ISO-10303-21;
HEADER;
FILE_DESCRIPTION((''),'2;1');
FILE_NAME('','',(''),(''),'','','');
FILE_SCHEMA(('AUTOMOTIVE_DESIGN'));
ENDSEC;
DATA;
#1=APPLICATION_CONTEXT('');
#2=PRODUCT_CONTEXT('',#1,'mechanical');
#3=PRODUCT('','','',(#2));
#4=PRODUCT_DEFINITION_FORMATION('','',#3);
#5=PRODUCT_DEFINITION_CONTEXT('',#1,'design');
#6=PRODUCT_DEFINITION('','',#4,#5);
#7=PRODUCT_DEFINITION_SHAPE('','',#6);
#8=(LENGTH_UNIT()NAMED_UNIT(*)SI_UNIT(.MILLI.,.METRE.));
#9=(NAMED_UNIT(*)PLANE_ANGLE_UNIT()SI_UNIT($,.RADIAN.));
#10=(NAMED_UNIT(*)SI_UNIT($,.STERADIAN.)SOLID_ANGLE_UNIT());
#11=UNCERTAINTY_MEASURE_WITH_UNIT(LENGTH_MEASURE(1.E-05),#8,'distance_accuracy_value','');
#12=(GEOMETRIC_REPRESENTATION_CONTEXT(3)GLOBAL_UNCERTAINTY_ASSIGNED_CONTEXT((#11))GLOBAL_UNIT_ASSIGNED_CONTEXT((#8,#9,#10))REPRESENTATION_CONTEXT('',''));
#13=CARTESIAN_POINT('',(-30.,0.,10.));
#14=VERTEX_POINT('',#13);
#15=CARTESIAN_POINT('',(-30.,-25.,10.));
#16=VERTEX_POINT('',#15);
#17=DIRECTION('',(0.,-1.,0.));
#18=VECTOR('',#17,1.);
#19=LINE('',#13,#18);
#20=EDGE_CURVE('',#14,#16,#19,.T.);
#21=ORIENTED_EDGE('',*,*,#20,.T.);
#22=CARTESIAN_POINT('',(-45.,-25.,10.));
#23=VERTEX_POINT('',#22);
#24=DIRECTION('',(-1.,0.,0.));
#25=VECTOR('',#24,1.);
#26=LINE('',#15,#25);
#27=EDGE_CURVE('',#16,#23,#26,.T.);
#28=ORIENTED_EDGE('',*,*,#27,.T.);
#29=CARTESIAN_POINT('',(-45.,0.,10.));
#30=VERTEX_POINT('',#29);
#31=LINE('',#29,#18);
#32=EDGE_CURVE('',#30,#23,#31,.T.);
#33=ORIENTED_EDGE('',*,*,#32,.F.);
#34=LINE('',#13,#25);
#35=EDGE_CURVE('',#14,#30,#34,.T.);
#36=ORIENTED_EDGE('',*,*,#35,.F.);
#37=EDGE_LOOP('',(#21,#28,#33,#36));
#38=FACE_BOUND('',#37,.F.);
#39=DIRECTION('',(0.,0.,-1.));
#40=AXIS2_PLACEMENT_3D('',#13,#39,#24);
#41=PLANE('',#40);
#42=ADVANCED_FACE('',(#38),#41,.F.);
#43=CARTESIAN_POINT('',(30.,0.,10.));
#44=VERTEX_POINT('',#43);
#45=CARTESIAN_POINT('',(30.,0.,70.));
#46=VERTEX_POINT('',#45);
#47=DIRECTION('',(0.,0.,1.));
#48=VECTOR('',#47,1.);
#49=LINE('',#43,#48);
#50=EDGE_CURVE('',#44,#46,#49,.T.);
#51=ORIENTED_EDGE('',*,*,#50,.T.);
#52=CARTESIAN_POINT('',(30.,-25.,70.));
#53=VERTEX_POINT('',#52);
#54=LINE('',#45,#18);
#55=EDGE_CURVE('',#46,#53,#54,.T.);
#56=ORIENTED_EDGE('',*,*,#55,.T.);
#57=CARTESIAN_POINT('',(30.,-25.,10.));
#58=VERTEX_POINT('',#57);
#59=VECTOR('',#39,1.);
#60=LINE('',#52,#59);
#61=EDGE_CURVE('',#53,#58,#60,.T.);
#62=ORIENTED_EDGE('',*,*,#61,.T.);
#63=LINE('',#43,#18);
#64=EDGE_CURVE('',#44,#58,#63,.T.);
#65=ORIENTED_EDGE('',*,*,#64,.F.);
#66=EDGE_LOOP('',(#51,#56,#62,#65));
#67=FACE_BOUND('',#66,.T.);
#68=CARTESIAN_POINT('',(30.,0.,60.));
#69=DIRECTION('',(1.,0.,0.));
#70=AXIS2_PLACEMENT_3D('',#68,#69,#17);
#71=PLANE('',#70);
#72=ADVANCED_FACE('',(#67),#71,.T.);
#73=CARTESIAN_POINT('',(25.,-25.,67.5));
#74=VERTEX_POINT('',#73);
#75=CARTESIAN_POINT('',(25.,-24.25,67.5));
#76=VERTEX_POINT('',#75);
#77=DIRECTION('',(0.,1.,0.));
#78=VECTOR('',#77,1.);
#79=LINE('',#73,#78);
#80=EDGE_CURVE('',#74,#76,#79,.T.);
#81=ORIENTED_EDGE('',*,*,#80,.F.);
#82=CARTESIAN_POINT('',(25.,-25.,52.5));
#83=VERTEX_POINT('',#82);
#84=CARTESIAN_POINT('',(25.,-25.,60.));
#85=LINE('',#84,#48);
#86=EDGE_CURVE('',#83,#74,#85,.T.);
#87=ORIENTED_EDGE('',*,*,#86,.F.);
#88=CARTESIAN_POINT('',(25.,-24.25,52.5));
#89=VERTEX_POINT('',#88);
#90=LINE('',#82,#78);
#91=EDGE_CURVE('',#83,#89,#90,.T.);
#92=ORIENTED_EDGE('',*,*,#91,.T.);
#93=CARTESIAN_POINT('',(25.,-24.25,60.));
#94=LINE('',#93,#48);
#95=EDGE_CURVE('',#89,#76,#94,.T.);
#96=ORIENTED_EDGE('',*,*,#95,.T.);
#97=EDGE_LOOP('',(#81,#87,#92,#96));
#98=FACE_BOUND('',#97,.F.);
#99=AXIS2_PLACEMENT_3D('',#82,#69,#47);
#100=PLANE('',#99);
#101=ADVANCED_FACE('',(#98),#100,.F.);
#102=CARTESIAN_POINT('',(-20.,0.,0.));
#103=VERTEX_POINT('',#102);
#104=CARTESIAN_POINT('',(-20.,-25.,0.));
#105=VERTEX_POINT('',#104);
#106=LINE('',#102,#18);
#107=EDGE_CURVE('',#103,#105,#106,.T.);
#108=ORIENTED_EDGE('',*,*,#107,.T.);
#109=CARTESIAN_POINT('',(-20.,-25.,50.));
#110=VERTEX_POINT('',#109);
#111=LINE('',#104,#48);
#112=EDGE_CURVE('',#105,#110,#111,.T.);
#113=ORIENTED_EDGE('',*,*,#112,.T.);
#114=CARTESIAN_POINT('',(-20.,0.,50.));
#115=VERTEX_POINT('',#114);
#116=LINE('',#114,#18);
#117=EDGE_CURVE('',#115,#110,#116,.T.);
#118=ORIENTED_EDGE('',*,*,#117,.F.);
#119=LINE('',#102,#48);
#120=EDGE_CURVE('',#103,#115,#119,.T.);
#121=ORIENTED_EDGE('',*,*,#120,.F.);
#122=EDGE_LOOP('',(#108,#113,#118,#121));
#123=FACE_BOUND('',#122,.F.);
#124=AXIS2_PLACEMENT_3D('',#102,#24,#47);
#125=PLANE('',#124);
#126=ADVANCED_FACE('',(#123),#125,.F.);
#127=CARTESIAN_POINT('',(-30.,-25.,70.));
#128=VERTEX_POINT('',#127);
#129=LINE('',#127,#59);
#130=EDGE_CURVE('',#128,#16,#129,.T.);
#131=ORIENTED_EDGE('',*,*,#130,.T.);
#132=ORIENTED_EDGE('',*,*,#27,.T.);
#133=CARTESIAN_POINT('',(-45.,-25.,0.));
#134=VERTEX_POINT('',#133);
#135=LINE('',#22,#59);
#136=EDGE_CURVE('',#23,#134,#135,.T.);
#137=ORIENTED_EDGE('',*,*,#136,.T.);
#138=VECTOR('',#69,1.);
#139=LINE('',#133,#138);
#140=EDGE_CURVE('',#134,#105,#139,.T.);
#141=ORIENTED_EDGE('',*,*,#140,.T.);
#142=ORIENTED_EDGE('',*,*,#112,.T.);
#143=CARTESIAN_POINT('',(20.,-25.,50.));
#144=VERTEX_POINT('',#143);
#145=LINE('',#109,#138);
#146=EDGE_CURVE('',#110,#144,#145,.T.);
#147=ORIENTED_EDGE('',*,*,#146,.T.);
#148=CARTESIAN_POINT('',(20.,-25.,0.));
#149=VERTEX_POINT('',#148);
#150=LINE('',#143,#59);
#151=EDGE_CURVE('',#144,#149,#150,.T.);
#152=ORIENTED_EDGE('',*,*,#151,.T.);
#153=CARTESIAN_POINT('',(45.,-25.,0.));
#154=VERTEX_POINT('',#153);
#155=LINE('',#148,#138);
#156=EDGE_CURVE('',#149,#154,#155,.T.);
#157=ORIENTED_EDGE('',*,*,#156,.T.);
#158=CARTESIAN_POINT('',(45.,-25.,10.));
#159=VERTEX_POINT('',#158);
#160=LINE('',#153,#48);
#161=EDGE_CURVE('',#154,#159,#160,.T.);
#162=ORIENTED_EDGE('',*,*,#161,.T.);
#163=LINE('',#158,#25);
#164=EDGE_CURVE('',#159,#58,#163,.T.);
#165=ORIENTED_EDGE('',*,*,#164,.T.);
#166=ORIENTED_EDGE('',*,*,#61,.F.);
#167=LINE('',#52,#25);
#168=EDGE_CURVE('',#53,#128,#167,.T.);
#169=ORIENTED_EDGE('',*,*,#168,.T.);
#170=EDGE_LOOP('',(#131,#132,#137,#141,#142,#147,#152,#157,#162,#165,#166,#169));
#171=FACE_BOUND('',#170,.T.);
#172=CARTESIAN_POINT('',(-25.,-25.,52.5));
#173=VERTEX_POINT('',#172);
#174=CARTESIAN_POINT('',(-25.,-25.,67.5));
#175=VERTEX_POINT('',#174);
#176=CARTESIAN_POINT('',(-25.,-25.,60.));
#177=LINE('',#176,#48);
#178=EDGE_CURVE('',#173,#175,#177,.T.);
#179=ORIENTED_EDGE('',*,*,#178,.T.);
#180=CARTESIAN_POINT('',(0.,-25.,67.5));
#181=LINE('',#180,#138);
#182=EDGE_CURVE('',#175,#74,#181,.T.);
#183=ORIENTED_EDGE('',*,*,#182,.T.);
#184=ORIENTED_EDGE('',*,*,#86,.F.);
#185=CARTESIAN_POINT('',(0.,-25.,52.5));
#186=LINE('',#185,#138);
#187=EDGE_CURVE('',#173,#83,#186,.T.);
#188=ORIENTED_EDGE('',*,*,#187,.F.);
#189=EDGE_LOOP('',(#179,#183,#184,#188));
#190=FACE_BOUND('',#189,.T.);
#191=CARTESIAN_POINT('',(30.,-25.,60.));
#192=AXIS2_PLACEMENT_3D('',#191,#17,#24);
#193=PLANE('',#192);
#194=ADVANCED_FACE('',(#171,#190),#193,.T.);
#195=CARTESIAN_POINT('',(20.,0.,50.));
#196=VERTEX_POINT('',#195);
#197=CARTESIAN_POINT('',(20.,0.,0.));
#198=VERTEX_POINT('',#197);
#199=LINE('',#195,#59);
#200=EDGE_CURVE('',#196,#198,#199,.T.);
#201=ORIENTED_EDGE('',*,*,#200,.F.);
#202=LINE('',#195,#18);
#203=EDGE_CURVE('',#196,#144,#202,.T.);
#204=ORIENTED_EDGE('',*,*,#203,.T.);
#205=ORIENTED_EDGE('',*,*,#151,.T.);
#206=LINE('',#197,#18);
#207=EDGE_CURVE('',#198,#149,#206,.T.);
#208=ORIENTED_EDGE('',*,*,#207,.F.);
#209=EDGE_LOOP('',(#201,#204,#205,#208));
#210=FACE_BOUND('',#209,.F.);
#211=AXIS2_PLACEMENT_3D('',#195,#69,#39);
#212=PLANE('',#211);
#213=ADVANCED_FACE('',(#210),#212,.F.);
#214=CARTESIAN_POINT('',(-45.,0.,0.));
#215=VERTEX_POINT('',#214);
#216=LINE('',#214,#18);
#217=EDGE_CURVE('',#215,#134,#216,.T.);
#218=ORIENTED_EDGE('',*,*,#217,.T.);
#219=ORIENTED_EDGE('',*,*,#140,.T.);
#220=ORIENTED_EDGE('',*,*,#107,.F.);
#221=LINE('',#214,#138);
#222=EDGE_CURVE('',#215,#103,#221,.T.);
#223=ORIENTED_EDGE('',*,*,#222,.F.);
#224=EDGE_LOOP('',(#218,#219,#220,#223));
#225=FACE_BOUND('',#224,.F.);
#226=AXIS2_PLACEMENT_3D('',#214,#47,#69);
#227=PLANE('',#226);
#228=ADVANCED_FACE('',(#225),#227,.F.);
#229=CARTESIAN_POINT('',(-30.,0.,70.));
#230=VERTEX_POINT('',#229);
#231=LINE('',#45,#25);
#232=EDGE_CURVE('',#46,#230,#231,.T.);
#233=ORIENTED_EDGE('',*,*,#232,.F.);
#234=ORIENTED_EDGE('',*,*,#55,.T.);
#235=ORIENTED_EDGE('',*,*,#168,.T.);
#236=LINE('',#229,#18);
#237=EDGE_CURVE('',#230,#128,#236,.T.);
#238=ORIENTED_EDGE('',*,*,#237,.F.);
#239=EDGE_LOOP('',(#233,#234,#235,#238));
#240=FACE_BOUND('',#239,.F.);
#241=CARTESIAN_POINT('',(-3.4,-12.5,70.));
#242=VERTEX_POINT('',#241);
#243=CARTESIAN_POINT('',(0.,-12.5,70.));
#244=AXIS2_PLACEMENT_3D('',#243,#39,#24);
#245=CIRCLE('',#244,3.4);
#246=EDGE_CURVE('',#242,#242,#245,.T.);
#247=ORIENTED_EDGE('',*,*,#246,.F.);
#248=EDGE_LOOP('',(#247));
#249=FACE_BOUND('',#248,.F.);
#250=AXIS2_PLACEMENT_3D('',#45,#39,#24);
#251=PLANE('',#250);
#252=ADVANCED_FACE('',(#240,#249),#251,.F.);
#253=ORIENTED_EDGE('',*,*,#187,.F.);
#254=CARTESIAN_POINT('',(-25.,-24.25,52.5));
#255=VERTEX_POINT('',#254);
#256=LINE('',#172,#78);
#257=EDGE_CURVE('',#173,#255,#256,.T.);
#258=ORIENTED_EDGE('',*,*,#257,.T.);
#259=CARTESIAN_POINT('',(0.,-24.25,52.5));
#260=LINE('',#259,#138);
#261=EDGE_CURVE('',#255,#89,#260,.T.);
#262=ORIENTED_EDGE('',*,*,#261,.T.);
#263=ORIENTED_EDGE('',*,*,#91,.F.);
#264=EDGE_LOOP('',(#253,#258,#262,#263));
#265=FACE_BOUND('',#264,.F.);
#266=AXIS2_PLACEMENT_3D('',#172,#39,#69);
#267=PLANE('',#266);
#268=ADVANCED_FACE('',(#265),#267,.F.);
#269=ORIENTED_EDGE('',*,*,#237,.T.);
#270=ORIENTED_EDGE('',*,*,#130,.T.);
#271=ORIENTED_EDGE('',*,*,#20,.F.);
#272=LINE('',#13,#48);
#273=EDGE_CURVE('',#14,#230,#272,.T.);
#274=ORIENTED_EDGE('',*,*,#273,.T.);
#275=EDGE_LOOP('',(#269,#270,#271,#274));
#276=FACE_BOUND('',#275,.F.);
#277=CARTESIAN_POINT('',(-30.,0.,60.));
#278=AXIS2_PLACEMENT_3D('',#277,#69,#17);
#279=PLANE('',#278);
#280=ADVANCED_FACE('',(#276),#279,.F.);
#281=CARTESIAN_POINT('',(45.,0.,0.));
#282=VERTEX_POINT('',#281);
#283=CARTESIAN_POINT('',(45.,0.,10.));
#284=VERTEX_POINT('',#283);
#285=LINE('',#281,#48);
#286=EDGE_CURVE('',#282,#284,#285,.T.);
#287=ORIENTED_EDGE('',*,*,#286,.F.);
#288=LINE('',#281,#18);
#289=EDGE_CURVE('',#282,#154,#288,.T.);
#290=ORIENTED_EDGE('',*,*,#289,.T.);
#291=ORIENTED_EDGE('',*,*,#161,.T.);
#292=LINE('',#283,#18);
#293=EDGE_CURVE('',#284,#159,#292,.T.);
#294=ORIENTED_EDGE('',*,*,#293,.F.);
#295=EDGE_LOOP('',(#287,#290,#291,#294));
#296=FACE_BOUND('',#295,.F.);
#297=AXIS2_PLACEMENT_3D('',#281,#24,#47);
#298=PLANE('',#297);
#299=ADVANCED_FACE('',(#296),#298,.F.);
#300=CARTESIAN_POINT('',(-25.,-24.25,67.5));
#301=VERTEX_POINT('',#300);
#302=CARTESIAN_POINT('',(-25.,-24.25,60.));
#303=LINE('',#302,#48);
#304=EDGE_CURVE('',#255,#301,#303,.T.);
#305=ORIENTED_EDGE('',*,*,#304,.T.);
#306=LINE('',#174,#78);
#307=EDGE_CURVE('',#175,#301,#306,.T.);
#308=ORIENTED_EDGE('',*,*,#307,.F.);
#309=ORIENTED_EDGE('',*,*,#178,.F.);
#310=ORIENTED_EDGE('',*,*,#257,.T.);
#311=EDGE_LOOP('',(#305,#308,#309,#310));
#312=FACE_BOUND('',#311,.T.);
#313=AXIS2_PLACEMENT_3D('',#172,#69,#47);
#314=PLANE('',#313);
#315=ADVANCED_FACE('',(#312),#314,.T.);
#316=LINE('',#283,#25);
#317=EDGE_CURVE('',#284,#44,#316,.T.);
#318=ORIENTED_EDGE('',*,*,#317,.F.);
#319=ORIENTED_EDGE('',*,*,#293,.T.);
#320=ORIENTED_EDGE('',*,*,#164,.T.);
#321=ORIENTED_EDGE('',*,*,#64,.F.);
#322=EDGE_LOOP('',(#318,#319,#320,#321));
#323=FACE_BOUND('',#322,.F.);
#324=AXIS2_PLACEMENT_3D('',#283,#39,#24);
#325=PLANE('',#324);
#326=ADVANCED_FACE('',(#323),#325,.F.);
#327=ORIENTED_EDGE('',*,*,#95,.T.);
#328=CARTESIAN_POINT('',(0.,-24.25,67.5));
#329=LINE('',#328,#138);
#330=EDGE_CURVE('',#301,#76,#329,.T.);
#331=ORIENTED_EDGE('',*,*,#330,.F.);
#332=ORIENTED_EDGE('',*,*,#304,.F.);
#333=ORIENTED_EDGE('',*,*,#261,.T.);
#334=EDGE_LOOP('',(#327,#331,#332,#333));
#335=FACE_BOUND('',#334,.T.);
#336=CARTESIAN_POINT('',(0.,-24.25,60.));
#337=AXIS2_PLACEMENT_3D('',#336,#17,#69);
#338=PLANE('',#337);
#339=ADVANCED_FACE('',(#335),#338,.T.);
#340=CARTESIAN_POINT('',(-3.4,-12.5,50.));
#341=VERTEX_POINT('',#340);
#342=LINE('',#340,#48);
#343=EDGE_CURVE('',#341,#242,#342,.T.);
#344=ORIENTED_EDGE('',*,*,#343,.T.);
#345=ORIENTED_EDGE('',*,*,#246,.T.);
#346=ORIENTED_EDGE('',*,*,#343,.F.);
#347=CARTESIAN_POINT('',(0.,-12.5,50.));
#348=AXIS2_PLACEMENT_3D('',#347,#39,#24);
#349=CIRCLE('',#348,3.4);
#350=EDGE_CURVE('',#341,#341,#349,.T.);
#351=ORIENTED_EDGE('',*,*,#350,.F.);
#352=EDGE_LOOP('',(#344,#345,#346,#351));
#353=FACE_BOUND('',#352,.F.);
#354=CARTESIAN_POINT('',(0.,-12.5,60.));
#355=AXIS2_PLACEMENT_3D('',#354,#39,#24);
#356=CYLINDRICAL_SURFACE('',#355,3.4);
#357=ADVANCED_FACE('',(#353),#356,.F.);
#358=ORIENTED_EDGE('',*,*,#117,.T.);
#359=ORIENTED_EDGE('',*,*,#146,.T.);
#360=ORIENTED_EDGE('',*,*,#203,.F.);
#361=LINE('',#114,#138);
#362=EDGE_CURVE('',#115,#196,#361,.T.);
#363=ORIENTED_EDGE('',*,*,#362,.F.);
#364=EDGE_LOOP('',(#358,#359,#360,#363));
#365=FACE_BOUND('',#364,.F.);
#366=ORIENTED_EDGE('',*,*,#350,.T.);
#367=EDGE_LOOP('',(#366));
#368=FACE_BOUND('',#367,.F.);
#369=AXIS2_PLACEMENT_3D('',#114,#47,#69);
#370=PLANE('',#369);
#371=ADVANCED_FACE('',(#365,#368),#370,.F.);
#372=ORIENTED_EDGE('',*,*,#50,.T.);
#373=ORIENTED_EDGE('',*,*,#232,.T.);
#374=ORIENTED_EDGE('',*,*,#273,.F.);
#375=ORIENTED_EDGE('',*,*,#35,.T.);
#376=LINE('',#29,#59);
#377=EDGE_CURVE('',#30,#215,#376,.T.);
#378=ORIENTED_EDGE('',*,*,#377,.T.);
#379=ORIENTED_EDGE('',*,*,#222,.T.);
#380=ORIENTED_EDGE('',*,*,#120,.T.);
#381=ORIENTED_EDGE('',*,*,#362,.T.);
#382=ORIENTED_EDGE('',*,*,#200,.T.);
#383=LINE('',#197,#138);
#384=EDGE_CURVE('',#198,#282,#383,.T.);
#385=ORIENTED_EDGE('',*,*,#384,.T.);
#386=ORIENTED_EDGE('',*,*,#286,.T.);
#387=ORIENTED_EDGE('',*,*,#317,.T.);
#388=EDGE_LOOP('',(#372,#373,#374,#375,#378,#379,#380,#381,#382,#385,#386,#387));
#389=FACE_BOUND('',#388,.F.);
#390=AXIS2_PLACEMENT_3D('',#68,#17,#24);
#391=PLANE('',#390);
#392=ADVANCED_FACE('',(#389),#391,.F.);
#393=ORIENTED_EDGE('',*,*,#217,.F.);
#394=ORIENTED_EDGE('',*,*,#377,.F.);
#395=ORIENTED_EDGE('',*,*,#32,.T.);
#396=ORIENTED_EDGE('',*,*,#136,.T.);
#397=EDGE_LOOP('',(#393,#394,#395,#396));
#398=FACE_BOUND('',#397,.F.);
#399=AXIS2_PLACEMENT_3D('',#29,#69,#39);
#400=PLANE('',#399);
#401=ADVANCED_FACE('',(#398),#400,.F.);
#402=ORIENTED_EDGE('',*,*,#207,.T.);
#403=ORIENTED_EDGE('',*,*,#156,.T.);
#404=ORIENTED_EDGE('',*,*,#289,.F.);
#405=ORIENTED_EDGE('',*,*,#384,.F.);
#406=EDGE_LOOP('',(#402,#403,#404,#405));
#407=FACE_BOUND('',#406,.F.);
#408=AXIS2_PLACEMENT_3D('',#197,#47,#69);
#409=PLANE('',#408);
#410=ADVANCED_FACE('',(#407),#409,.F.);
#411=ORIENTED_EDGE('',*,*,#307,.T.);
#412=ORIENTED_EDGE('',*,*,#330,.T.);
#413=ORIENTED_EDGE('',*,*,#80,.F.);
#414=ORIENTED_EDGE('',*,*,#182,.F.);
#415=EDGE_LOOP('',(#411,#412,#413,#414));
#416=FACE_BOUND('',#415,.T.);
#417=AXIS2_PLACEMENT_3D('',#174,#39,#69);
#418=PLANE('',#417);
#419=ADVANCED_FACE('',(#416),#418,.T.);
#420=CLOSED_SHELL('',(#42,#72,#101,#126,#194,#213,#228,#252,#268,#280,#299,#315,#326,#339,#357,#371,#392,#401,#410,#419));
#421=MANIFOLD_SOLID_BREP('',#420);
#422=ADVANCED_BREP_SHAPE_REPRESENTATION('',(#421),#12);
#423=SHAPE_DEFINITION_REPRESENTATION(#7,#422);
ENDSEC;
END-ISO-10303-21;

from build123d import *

# Parameters (mm, degrees)
F1_DEPTH = 25
F3_D     = 6.8
F3_DEPTH = 14
F3_TIP   = 2.0429261047
F4_DEPTH = 10
F5_W     = 50
F5_H     = 15
F6_DEPTH = 0.75


with BuildPart() as f1:
    # F0 (on Front) → F1 (new body)
    with BuildSketch(Plane.XZ):
        Polygon((30, 60), (0, 60), (-30, 60), (-30, 10), (-45, 10), (-45, 0), (-20, 0), (-20, 50), (0, 50), (20, 50), (20, 0), (45, 0), (45, 10), (30, 10), align=None)
    extrude(amount=F1_DEPTH)

    # F3
    with Locations(Plane.XY.offset(60)):
        with Locations((0, -12.5)):
            Hole(F3_D / 2, depth=F3_DEPTH)
            with Locations((0, 0, -(F3_DEPTH + F3_TIP / 2))):  # 118° drill point
                Cone(0, F3_D / 2, F3_TIP, mode=Mode.SUBTRACT)

    # F4 (add): a face of the model
    f4_faces = [f1.faces().sort_by_distance(p)[0] for p in [
        (29.35, -12.5, 60),
    ]]
    extrude(f4_faces, amount=F4_DEPTH)

    # F5 (on face) → F6 (cut)
    with BuildSketch(Plane.XZ.offset(25)):
        with Locations((0, 60)):
            Rectangle(F5_W, F5_H)
    extrude(amount=-F6_DEPTH, mode=Mode.SUBTRACT)


solid = f1.part
